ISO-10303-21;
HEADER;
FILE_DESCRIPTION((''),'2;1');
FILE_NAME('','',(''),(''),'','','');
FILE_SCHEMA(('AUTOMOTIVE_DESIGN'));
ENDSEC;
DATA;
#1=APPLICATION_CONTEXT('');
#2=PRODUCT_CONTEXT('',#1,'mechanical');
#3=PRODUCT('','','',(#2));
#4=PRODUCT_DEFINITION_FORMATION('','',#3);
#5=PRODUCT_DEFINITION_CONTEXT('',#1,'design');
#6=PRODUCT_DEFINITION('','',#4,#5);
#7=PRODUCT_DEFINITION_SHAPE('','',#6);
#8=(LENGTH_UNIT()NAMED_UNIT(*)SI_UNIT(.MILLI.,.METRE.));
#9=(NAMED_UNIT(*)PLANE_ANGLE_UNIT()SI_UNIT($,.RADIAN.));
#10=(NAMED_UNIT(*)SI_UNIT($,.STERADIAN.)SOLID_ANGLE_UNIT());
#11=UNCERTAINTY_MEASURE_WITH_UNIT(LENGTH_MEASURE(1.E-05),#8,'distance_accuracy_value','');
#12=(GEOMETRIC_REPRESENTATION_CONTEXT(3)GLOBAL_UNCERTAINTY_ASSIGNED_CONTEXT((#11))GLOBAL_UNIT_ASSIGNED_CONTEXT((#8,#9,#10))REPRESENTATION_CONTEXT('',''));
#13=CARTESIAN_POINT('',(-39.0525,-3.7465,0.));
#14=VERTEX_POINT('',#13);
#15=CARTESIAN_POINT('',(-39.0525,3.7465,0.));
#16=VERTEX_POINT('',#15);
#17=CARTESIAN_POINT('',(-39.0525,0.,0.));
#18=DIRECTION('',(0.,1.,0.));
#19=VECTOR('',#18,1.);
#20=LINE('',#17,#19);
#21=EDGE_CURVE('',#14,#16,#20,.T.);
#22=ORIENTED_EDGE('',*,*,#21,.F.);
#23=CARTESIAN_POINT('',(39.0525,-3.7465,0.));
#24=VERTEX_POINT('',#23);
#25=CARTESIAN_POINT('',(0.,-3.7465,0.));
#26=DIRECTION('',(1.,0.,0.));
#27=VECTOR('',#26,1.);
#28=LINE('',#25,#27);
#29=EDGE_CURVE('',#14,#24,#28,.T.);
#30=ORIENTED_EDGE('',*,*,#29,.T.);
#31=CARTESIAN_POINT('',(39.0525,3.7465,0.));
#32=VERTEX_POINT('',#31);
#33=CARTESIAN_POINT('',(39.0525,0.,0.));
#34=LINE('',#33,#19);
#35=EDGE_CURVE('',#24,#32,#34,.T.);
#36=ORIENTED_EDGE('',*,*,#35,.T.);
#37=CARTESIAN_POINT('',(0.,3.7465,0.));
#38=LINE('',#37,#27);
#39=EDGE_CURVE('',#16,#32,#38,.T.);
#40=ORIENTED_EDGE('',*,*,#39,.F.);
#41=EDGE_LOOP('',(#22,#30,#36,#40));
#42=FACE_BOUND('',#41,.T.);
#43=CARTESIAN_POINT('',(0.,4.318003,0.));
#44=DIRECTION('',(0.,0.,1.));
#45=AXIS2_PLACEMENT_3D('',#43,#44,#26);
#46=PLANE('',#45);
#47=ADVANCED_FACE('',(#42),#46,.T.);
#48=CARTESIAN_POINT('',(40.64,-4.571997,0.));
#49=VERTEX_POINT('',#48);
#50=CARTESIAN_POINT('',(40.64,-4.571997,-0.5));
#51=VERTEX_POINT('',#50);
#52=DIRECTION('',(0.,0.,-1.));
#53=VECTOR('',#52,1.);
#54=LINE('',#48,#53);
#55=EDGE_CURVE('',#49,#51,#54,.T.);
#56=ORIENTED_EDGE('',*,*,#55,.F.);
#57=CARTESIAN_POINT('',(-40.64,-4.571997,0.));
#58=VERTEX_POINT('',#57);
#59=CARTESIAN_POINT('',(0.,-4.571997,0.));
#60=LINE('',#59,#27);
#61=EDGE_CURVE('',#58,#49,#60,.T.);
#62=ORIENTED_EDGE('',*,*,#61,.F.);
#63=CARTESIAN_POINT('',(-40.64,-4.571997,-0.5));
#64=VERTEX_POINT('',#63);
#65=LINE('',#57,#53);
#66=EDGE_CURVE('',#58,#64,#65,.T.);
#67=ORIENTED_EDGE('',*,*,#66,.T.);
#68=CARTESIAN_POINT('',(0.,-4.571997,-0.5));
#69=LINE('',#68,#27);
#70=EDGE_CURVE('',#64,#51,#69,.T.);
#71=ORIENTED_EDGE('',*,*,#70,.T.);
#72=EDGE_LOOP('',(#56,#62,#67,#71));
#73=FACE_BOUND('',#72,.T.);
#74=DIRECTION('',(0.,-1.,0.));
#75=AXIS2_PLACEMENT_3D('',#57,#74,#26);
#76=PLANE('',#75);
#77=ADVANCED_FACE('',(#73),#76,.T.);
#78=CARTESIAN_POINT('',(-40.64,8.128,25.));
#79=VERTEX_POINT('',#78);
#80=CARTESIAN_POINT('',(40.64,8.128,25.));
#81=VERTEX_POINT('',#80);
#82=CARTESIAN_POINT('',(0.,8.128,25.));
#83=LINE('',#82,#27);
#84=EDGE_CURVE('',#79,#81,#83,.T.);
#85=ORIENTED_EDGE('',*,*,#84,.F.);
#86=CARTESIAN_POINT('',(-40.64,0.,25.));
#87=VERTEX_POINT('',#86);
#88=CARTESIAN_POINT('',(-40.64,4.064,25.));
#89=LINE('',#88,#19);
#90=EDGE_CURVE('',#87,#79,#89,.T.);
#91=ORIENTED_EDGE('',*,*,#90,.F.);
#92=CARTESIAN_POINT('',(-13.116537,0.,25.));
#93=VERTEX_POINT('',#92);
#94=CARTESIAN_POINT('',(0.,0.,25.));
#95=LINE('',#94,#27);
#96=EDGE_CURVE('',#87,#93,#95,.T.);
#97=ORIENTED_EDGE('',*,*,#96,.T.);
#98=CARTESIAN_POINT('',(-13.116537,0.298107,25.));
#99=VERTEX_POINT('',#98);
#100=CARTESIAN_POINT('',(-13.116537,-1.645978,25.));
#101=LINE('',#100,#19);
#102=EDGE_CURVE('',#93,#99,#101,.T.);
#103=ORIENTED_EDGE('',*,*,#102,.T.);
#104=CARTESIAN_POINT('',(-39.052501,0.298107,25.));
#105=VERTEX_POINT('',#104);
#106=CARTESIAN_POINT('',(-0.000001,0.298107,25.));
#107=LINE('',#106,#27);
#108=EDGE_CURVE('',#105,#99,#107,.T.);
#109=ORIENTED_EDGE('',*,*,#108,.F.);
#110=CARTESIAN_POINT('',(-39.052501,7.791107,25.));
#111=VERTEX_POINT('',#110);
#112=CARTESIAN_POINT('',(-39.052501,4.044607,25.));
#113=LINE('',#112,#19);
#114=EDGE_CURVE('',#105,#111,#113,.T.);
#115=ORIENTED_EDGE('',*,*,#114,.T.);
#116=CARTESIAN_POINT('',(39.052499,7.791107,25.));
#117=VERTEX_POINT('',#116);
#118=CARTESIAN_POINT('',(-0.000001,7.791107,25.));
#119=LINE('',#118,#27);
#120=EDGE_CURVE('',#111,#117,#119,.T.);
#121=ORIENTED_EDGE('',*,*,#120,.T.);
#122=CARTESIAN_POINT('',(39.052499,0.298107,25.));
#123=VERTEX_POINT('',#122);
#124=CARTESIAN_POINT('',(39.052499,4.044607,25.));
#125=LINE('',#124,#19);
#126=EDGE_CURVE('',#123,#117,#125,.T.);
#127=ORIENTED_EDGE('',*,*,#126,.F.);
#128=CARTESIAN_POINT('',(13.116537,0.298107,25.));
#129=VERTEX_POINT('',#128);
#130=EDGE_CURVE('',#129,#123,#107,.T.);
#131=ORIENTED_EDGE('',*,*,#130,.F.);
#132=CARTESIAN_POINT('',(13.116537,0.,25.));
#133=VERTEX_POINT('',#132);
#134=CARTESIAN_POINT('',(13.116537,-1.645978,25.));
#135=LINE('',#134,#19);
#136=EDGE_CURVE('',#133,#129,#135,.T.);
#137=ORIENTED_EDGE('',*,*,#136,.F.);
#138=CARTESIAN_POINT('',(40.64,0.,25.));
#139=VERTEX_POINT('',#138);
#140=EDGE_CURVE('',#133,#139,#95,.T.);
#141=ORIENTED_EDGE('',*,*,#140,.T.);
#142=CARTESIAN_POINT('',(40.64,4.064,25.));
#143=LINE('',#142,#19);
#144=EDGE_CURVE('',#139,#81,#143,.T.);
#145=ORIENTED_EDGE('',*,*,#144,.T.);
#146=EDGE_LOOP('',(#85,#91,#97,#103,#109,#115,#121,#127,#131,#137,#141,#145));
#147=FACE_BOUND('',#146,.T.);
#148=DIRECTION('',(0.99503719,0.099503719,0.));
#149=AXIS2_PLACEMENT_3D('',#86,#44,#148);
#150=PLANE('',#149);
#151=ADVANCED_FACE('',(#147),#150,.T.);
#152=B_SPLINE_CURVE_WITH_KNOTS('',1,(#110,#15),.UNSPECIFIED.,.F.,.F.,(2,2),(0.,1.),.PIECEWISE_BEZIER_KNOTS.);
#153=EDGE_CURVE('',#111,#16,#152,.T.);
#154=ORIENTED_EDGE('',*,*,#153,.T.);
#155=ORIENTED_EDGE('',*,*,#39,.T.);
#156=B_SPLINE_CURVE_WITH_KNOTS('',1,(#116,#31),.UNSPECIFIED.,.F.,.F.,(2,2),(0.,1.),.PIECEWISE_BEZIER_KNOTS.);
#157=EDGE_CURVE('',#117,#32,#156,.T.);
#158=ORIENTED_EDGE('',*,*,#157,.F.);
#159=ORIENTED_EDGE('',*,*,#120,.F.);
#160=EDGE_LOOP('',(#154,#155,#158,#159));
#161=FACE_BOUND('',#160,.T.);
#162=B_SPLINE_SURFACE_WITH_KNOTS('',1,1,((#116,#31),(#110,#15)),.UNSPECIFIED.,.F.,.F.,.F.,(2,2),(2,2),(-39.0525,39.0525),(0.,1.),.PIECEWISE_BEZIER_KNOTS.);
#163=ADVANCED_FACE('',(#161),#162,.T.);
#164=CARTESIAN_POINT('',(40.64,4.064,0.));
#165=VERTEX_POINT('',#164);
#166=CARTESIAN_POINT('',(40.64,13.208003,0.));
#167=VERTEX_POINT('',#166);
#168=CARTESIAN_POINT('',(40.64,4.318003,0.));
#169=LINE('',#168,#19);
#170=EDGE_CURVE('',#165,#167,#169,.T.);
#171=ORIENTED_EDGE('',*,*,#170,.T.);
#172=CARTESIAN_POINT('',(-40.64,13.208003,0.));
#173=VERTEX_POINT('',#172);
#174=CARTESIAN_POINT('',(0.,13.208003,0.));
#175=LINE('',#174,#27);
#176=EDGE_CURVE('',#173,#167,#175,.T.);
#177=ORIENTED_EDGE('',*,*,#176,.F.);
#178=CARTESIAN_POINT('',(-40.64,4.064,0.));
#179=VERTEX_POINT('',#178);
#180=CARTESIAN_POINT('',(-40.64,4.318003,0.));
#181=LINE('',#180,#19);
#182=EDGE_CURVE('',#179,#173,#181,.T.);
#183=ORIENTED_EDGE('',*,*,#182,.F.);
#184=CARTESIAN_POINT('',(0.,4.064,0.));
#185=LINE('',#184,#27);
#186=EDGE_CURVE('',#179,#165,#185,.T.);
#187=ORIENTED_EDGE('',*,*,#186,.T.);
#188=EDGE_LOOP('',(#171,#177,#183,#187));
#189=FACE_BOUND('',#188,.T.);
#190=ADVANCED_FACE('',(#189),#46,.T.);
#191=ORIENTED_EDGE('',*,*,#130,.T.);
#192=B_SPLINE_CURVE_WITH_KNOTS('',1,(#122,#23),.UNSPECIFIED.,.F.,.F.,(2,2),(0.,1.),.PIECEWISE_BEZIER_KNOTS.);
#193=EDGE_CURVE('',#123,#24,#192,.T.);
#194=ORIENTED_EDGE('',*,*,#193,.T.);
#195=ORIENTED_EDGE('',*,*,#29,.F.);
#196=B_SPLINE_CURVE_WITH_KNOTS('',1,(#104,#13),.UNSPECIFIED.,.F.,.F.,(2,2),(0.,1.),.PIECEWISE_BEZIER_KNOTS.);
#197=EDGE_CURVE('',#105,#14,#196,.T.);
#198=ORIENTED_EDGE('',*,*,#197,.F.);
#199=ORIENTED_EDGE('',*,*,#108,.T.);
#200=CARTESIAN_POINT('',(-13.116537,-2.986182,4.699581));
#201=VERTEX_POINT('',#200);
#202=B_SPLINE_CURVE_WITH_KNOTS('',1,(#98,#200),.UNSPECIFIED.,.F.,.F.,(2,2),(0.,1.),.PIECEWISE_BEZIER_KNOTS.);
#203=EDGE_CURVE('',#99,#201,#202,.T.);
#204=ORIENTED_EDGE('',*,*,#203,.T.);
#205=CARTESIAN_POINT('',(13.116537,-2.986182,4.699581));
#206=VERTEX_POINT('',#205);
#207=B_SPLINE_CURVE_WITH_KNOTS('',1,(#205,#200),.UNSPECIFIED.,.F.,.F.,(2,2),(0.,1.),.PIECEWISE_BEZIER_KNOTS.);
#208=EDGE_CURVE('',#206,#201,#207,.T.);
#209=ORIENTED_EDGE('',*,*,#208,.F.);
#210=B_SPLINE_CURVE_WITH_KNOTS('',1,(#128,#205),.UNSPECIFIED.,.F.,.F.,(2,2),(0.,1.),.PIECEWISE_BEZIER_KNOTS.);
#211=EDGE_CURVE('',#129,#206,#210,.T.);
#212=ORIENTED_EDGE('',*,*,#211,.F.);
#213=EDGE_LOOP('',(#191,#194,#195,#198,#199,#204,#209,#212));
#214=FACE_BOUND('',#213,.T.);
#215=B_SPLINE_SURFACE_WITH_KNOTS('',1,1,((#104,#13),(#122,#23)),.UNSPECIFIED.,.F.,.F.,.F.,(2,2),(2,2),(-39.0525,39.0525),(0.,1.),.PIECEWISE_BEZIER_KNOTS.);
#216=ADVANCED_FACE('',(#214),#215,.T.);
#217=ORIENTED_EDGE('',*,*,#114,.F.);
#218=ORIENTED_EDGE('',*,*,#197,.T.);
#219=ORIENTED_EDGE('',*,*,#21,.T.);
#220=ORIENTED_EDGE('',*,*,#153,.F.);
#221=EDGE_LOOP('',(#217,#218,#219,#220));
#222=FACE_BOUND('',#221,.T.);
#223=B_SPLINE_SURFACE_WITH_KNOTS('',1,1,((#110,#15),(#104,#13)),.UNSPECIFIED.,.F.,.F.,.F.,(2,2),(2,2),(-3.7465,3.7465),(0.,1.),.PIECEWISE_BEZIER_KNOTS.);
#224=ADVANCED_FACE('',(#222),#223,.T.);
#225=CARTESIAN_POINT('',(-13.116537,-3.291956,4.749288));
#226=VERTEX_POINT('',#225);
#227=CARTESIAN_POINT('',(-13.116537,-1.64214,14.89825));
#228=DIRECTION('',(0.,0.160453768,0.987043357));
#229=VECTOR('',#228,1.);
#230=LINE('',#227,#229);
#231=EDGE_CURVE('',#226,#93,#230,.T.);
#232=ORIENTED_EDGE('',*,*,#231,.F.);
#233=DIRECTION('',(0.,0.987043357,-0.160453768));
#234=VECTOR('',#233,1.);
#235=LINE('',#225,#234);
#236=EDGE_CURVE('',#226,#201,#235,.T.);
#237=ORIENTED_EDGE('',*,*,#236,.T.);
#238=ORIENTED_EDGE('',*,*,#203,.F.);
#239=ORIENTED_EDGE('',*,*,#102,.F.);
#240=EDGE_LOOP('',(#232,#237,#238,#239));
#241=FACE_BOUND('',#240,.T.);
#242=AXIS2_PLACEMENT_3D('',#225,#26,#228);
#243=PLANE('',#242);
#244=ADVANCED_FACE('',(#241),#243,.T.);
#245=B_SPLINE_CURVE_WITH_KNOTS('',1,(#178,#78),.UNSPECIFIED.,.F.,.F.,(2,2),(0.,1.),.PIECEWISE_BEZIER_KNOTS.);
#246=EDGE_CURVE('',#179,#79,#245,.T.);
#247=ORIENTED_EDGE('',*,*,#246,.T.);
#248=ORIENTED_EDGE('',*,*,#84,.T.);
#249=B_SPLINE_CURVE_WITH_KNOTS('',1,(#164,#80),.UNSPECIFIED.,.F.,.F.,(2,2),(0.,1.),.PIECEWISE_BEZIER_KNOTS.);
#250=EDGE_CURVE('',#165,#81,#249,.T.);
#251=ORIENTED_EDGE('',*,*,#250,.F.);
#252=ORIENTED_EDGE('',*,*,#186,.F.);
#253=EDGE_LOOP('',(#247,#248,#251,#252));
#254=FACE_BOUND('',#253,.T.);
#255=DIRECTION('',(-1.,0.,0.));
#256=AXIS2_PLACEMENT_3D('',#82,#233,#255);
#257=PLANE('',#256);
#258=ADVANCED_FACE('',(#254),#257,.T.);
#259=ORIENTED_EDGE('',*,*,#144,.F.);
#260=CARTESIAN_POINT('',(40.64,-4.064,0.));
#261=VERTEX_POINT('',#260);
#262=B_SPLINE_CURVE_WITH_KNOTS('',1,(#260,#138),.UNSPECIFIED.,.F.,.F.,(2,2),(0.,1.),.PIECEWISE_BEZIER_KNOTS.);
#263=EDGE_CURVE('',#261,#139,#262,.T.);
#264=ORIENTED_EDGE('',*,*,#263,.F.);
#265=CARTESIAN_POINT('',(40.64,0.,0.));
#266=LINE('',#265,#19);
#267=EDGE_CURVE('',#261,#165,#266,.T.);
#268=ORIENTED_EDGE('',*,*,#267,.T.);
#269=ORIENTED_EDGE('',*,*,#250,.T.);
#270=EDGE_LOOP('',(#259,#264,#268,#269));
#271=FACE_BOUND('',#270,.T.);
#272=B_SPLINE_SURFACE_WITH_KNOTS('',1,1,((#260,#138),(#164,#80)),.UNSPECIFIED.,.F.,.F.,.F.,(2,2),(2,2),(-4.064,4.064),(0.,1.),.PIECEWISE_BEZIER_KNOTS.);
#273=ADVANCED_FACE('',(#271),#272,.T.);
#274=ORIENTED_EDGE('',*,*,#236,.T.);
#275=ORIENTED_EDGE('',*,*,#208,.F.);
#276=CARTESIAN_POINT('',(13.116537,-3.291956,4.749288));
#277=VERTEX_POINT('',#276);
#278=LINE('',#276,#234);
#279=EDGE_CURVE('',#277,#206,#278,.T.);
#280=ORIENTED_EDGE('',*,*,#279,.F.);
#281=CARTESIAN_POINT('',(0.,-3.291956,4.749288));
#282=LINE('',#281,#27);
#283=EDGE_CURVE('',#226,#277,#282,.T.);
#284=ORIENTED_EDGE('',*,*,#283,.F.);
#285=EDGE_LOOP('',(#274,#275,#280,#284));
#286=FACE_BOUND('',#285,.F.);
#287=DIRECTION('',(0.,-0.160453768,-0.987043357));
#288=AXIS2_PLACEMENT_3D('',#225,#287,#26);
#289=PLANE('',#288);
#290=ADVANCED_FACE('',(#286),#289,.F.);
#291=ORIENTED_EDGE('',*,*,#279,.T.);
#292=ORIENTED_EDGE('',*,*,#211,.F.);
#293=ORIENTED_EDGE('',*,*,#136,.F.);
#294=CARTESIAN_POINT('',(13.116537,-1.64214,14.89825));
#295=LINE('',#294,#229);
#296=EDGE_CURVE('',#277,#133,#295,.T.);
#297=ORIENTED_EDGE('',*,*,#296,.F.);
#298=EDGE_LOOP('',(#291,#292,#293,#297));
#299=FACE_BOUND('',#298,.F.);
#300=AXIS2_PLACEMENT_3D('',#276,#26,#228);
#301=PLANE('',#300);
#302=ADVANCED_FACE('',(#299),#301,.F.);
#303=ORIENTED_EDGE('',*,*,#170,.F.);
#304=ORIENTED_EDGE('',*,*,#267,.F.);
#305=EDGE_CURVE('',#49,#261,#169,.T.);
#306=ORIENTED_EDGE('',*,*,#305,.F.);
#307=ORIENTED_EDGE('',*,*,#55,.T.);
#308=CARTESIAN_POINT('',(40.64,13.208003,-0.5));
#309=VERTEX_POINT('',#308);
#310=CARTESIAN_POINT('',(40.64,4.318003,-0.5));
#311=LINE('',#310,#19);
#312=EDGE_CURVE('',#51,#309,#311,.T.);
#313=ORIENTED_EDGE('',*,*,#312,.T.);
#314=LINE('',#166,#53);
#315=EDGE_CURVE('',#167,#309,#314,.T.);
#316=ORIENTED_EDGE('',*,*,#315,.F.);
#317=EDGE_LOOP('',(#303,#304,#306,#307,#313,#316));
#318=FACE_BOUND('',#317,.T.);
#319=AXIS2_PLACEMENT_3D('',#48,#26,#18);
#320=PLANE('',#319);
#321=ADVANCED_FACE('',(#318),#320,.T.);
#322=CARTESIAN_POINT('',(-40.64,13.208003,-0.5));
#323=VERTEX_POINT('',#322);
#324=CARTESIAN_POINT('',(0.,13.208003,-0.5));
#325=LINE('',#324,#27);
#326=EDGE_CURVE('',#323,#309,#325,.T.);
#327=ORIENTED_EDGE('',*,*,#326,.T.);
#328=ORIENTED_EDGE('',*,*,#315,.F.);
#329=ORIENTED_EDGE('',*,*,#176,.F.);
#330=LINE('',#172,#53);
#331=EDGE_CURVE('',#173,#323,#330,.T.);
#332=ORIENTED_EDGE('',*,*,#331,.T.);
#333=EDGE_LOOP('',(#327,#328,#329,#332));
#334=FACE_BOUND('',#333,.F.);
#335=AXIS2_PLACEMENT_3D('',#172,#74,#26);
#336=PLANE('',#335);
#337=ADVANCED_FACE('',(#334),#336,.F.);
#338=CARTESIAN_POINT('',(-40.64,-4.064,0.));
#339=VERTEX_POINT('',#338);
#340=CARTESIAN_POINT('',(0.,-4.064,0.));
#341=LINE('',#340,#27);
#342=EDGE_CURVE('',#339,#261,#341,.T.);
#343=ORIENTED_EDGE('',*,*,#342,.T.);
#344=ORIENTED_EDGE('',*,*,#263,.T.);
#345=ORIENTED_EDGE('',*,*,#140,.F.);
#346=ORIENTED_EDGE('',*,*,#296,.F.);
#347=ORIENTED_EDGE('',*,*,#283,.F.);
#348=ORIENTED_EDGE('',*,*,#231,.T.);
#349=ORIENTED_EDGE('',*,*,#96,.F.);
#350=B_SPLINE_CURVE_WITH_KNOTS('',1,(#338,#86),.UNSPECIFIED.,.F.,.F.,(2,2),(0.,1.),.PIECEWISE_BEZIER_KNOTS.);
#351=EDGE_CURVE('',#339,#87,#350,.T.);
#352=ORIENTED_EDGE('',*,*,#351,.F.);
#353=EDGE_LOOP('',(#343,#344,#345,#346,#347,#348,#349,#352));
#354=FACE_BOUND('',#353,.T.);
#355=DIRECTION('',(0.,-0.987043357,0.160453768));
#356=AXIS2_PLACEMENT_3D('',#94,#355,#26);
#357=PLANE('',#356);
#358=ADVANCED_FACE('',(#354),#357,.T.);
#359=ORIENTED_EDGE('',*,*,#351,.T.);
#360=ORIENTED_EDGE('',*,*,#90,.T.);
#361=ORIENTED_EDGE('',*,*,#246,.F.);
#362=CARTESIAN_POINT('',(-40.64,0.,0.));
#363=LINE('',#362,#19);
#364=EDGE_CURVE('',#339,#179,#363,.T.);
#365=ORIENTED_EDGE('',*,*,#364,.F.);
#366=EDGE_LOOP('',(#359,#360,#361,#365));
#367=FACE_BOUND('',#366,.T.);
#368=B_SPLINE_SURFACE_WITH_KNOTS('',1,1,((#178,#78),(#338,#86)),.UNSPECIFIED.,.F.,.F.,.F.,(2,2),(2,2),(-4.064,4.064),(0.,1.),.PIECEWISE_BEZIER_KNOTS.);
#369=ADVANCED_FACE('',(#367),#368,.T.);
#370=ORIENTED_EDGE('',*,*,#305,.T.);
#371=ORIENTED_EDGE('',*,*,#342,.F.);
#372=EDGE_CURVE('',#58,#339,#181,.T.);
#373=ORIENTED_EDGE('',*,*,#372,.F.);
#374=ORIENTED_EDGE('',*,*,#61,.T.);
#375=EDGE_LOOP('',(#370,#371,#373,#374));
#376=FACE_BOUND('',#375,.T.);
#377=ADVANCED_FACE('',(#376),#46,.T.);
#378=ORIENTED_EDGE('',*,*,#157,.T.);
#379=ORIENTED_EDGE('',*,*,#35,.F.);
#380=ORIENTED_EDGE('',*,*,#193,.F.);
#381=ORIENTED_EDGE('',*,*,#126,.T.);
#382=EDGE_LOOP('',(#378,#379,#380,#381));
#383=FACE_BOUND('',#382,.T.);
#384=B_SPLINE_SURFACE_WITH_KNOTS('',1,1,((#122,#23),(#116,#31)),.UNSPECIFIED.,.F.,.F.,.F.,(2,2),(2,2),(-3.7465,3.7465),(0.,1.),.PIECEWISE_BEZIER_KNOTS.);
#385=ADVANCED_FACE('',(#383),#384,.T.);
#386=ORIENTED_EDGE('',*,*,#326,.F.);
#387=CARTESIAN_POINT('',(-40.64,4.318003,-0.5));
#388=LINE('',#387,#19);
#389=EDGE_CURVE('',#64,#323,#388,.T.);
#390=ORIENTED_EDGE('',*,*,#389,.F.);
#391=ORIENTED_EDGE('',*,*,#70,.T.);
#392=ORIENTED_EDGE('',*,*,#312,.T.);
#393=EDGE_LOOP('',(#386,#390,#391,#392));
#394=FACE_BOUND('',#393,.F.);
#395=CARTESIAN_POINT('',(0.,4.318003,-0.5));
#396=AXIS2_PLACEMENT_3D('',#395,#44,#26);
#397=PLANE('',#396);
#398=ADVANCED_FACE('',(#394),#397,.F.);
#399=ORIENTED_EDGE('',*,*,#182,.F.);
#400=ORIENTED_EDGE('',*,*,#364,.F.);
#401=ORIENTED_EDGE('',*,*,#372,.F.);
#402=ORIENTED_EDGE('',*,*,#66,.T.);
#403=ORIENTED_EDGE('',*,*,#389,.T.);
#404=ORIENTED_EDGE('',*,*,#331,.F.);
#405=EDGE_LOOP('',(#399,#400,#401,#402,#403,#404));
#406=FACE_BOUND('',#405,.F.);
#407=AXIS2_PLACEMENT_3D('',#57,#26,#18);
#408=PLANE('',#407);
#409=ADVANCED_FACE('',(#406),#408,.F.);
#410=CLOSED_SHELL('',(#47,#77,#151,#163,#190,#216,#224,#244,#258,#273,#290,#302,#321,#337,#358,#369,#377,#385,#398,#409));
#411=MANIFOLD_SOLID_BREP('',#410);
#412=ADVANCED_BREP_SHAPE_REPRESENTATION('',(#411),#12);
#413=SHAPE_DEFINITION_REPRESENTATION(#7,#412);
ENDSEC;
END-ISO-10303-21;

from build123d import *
from build123d import SkipClean  # not in build123d's __all__

# Parameters (mm, degrees)
F1_W      = 81.28
F1_H      = 8.128
F2_W      = 81.28
F2_H      = 8.128
F4_W      = 26.233073324
F4_H      = 20.56436991
F5_DEPTH  = 1
F6_W      = 78.105
F6_H      = 7.493
F7_W      = 78.105
F7_H      = 7.493
F9_W      = 81.28
F9_H      = 17.78
F10_DEPTH = 0.5


with BuildPart() as f3:
    # F1 (on Top) → F3 section 0
    with BuildSketch(Plane.XY):
        Rectangle(F1_W, F1_H)
    # F2 (on offset) → F3 section 1
    with BuildSketch(Plane.XY.offset(25)):
        with Locations((0, 4.064)):
            Rectangle(F2_W, F2_H)
    loft()

    # F4 (on face) → F5 (cut)
    with BuildSketch(Plane(origin=(0, -3.9593706469, 0.6436352924), x_dir=(1, 0, 0), z_dir=(0, -0.9870433569, 0.1604537681))):
        with Locations((0, 14.4417314122)):
            Rectangle(F4_W, F4_H)
    extrude(amount=-F5_DEPTH, mode=Mode.SUBTRACT)

    # F6 (on offset) → F8 section 0
    with BuildSketch(Plane.XY.offset(25)):
        with Locations((-1.3208e-06, 4.0446073394)):
            Rectangle(F6_W, F6_H)
    # F7 (on Top) → F8 section 1
    with BuildSketch(Plane.XY):
        Rectangle(F7_W, F7_H)
    loft(mode=Mode.SUBTRACT)

    # F9 (on Top) → F10 (join)
    with BuildSketch(Plane.XY):
        with Locations((-2.539e-07, 4.3180031988)):
            Rectangle(F9_W, F9_H)
    with SkipClean():  # cleaning this boolean's faces spoils the solid; the shape is the same uncleaned
        extrude(amount=-F10_DEPTH)


solid = f3.part
